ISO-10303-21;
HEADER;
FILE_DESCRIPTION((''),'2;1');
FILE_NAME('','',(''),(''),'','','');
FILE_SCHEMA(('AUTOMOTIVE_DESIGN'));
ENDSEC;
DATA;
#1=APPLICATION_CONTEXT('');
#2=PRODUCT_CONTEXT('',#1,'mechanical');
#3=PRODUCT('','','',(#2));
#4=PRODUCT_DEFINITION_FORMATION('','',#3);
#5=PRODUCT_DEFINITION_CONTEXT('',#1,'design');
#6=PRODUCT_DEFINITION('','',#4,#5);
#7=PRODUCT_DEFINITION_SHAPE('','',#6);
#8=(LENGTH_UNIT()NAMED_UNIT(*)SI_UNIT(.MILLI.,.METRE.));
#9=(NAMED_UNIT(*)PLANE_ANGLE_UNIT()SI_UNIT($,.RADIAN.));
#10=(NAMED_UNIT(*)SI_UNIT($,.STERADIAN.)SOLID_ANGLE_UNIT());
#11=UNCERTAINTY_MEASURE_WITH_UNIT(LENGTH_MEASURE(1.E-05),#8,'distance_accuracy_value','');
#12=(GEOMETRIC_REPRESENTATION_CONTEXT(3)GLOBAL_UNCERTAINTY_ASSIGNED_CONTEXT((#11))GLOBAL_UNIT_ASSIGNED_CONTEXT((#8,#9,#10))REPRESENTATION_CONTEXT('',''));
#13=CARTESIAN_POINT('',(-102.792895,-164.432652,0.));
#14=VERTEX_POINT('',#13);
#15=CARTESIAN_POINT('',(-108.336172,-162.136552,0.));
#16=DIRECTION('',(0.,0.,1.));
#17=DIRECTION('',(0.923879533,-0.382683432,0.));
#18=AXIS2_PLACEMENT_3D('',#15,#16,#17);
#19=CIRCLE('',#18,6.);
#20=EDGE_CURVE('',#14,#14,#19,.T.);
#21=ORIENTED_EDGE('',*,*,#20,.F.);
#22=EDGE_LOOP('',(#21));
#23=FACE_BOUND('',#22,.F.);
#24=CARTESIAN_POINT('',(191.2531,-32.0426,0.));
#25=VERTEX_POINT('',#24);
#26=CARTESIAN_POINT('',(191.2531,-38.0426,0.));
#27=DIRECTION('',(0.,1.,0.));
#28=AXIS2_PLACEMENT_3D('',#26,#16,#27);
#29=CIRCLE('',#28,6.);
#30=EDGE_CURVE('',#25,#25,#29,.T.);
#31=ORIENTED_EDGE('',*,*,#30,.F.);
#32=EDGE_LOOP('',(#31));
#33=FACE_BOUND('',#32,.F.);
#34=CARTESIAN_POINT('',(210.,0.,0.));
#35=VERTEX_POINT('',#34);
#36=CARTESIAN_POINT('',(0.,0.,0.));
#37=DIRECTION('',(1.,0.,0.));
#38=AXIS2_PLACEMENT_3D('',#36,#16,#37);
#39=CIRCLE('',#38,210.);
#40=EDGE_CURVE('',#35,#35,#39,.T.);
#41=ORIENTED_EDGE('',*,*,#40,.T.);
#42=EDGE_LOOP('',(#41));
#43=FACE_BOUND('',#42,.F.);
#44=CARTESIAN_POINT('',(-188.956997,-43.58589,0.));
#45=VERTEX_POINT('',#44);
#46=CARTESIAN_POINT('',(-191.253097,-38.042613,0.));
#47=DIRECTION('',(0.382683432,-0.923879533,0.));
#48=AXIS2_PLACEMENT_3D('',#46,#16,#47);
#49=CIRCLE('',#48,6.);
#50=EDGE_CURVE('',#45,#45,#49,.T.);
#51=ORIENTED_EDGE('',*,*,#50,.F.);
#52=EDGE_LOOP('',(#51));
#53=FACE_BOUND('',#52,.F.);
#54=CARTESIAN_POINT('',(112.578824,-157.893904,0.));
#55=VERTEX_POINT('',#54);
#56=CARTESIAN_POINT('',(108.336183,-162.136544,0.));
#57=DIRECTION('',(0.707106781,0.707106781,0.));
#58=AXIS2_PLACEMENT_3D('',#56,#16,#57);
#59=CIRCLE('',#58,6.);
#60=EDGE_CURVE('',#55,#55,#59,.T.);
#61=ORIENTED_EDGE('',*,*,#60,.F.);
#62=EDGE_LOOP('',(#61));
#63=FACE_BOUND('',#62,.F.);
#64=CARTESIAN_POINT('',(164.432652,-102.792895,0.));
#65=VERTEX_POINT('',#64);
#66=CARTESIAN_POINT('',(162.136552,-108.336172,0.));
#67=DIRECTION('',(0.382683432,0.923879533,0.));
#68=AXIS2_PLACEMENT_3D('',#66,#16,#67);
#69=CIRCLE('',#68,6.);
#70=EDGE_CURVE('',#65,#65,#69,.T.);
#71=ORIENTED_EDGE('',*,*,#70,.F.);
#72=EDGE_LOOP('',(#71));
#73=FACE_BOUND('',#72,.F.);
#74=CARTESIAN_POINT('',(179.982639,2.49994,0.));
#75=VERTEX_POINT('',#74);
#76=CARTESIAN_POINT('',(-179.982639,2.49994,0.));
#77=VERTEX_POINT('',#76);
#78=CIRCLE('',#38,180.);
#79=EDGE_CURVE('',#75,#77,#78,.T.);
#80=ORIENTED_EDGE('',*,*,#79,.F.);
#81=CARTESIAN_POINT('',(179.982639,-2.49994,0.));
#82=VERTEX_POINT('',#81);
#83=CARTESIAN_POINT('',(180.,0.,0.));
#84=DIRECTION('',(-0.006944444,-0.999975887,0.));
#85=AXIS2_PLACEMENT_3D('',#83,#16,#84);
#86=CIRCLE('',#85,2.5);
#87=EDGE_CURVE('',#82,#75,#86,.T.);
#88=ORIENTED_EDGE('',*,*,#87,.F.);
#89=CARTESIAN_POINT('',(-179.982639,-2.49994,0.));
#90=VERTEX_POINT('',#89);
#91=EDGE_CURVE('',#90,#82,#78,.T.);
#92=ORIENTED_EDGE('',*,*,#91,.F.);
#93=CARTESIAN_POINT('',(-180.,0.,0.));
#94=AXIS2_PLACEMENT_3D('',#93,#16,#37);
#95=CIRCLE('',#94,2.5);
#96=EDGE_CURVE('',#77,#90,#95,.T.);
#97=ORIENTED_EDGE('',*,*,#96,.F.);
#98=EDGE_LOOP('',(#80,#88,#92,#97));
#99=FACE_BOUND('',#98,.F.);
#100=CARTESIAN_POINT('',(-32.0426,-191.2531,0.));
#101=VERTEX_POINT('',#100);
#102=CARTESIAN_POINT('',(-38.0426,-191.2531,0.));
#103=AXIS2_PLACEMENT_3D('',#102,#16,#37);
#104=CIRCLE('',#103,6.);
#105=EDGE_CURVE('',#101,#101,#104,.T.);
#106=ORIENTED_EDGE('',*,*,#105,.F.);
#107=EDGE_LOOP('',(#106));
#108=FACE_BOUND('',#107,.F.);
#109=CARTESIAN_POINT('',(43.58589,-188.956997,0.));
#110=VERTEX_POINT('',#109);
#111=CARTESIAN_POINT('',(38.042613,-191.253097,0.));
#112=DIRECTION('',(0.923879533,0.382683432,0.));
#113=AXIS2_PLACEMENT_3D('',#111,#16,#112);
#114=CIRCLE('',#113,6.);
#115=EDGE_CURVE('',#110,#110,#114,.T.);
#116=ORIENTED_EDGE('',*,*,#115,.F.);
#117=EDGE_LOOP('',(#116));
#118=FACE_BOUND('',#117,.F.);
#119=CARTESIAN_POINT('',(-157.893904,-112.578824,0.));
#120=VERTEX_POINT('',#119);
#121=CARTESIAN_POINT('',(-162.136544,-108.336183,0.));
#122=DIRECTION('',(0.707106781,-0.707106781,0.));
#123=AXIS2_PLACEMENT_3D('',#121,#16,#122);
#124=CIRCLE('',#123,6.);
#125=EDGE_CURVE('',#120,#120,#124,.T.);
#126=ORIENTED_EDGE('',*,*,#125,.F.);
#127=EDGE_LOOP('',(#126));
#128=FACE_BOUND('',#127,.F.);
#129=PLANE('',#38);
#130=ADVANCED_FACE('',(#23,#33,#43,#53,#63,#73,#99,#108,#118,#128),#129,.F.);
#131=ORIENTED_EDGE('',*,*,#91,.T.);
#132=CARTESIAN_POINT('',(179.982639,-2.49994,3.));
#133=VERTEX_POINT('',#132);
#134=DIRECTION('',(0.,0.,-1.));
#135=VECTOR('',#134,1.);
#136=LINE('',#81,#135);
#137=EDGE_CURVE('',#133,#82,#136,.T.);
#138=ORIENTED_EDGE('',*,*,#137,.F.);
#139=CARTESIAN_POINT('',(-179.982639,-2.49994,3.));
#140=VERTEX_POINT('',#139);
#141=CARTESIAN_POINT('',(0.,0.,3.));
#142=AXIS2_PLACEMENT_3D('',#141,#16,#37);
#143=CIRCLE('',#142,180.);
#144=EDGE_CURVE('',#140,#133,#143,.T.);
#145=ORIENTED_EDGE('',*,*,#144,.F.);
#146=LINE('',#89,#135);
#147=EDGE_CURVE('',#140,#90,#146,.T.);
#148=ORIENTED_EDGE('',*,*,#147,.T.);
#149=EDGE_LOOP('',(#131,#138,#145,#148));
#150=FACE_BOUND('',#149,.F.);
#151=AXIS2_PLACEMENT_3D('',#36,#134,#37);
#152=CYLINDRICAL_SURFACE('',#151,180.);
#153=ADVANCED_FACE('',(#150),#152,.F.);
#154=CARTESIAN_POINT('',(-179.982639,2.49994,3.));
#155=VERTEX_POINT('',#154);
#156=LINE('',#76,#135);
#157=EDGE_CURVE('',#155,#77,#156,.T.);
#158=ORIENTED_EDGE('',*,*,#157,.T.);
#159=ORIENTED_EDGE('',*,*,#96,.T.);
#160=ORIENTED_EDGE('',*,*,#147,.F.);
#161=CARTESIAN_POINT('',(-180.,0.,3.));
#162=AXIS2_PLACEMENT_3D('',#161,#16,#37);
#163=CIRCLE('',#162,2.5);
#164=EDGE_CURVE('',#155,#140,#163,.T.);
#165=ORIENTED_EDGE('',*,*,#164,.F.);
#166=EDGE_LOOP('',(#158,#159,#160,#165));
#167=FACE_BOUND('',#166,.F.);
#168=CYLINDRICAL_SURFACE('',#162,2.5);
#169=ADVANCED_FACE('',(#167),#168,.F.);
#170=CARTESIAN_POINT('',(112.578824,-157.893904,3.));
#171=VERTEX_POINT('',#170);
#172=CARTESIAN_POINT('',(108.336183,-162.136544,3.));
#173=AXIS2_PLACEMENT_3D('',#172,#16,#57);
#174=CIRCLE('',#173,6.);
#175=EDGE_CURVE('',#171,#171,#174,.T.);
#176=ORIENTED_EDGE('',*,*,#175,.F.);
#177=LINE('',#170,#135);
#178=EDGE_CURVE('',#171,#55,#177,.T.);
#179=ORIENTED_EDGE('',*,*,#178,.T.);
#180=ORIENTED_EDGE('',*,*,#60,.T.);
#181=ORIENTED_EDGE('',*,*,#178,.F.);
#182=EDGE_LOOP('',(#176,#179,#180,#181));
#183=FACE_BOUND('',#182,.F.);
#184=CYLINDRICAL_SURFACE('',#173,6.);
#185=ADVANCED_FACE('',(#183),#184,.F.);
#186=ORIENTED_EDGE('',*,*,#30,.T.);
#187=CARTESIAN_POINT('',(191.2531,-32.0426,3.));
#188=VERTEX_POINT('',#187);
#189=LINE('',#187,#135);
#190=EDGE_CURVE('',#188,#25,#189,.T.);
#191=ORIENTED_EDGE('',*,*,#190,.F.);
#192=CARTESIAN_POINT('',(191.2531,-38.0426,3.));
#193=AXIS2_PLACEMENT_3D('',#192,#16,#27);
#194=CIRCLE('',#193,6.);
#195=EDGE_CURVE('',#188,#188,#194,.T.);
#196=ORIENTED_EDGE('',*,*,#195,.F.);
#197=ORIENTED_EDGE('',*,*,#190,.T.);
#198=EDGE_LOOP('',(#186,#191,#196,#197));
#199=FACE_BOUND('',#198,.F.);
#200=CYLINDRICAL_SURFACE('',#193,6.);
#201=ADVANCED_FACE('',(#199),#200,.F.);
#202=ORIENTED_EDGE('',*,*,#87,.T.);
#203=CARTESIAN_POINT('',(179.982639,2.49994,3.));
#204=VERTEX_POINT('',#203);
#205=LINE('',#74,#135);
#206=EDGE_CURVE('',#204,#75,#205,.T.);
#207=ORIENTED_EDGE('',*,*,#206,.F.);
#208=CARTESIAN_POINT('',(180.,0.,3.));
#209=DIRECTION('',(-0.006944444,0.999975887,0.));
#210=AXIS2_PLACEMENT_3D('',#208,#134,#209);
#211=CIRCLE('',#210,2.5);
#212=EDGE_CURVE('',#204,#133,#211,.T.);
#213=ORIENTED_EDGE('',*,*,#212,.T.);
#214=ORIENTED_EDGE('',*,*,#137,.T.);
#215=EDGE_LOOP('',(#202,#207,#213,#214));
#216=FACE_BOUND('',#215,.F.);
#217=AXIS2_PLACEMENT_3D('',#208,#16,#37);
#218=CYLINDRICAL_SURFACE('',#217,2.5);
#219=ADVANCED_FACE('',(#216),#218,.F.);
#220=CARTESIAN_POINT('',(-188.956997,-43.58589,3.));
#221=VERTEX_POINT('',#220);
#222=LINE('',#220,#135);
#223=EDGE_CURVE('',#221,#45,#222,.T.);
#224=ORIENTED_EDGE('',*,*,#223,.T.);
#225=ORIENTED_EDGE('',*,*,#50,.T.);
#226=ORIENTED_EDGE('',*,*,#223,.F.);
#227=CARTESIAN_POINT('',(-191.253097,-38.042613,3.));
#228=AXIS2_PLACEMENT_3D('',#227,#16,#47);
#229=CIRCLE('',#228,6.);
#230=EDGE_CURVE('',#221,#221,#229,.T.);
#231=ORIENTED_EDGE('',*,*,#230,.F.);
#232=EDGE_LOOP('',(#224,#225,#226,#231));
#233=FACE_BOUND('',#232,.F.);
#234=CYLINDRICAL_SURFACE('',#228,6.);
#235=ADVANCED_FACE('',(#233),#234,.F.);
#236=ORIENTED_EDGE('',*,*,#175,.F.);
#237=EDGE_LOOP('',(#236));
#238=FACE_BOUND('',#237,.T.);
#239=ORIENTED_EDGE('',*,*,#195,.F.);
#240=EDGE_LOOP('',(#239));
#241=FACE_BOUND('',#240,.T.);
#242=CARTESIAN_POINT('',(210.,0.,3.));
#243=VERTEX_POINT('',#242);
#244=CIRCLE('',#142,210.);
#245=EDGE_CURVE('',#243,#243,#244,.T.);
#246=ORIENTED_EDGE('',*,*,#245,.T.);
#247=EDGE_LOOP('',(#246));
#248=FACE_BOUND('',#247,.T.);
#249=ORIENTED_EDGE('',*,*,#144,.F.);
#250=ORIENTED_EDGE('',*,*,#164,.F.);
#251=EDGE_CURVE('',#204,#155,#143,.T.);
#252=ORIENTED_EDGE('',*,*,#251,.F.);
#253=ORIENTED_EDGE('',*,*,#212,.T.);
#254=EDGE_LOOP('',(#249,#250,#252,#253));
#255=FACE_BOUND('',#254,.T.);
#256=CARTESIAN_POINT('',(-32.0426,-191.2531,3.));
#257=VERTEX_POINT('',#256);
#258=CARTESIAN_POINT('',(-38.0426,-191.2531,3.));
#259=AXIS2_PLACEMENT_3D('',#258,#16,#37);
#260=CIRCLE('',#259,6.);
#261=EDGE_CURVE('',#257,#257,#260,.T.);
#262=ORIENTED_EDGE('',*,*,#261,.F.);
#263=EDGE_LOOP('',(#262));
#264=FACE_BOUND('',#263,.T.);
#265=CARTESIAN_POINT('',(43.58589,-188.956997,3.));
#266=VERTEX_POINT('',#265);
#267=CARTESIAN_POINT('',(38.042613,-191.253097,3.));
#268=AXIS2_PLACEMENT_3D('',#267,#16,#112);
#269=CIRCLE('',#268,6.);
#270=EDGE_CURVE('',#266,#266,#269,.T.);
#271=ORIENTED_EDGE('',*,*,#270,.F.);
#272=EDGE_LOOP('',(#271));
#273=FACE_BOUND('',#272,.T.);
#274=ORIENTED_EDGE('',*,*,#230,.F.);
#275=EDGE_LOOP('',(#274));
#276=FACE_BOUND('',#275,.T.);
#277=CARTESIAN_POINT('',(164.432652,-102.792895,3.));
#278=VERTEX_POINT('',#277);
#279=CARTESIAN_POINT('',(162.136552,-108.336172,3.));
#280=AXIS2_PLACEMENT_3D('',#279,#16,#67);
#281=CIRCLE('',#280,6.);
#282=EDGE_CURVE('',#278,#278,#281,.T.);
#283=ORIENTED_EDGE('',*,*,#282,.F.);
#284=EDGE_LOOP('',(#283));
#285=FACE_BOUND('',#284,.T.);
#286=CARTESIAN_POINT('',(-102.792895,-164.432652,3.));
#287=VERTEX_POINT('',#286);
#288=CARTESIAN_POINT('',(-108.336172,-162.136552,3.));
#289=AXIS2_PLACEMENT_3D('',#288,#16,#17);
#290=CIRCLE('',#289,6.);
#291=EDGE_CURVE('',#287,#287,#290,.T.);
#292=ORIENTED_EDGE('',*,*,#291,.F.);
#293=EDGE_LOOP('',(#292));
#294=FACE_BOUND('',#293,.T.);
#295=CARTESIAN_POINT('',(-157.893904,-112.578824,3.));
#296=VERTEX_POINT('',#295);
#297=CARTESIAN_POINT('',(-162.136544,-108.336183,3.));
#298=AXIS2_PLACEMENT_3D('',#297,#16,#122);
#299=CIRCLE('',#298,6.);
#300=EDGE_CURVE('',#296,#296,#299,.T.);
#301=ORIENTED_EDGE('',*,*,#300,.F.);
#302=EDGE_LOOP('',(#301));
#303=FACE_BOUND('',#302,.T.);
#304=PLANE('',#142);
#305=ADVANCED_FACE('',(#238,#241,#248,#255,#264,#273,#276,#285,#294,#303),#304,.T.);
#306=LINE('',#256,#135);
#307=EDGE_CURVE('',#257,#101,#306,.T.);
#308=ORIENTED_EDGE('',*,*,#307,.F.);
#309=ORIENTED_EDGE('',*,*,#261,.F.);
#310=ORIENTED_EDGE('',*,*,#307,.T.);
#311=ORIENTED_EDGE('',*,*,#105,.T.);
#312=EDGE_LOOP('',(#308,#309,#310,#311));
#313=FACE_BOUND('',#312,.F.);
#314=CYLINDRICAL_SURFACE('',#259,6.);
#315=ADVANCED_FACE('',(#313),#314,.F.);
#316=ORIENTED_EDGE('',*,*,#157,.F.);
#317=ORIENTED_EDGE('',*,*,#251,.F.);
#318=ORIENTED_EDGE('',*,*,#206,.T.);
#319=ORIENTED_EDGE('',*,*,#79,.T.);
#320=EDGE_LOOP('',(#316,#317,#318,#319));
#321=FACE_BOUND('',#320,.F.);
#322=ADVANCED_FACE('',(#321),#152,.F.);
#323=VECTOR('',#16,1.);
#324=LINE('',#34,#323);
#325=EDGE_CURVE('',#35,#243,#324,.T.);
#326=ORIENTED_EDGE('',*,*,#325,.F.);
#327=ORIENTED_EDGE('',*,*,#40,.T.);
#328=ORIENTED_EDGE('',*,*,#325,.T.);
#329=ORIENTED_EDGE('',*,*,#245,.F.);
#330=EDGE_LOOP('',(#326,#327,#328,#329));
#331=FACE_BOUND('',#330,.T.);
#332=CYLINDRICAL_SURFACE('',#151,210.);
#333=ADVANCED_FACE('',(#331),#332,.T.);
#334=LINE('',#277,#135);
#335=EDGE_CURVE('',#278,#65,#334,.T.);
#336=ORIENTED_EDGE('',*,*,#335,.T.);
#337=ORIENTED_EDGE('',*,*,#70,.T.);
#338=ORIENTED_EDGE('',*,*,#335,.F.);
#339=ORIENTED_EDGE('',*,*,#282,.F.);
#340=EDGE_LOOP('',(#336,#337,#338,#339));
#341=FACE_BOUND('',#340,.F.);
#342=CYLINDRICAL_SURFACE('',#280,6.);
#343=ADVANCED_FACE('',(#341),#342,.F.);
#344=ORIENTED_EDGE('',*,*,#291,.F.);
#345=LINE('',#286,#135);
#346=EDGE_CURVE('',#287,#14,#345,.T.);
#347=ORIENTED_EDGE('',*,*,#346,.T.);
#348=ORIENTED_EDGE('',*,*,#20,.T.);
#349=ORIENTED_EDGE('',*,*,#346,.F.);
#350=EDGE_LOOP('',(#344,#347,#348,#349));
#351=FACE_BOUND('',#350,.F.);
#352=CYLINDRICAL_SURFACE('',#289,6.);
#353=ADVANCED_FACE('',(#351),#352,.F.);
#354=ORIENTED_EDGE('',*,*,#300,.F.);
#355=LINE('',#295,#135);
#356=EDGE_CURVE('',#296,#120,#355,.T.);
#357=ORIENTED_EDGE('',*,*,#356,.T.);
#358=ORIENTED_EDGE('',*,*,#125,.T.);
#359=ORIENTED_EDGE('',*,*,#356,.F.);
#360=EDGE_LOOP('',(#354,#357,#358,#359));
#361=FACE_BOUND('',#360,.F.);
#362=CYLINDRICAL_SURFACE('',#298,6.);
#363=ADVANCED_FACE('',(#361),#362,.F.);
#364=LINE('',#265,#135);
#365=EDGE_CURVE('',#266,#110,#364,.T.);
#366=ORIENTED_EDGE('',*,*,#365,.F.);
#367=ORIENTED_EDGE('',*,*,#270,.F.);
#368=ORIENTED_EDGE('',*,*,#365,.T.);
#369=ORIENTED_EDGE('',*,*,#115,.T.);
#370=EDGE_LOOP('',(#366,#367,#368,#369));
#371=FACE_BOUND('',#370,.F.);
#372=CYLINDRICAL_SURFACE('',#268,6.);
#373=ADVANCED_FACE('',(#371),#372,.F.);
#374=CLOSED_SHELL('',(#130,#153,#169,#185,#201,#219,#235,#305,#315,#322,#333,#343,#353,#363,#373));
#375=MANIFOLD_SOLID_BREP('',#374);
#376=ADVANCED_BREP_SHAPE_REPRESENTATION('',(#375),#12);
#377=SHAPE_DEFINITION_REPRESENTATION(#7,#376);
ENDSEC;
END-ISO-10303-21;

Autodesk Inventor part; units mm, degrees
ref_plane "YZ Plane" through (0, 0, 0) normal (1, 0, 0) x (0, 1, 0)
ref_plane "XZ Plane" through (0, 0, 0) normal (0, 1, 0) x (-1, 0, 0)
ref_plane "XY Plane" through (0, 0, 0) normal (0, 0, 1) x (1, 0, 0)
sketch "Sketch1" plane through (0, 0, 0) normal (0, 0, 1) x (1, 0, 0)
  circle A0 centre (0, 0) radius 180
  circle A1 centre (0, 0) radius 210
  circle A2 centre (0, 0) radius 195 construction
  line L0 (0, 210) -> (0, 180) construction
  point P0 (0, 195)
  dimension "d9" = 390
  dimension "d11" = 30
extrude "Plate1" add sketch "Sketch1" along normal blind 3
sketch "Sketch2" plane through (0, 0, 3) normal (0, 0, 1) x (1, 0, 0)
  circle A0 centre (0, 0) radius 180 construction
  circle A1 centre (0, 0) radius 210 construction
  circle A2 centre (0, 0) radius 210 projected
  circle A3 centre (0, 0) radius 180 projected
  line L0 (0, 0) -> (0, -210) construction
  line L1 (0, 0) -> (-40.969, -205.9649) construction
  line L2 (-35.1163, -176.5414) -> (-40.969, -205.9649) construction
  circle A4 centre (-38.0426, -191.2531) radius 6
  dimension "d20" = 11.25
  dimension "d21" = 12
extrude "Extrusion1" cut sketch "Sketch2" against normal through all contours A4
pattern_circular "Circular Pattern1" count 8 over 157.5 about axis through (0, 0, 0) along (0, 0, 1) of "Extrusion1" both ways yes
sketch "Sketch3" plane through (0, 0, 3) normal (0, 0, 1) x (1, 0, 0)
  circle A0 centre (0, 0) radius 180 construction
  line L0 (180, 0) -> (-180, 0) construction
  circle A1 centre (180, 0) radius 2.5
  circle A2 centre (-180, 0) radius 2.5
  circle A3 centre (-161.2452, -80) radius 2.5
  line L1 (-161.2452, -80) -> (161.2452, -80) construction
  circle A4 centre (161.2452, -80) radius 2.5
  dimension "d27" = 5
  dimension "d29" = 80
extrude "Extrusion2" cut sketch "Sketch3" against normal through all contours A1 | A2
equation "\"d9\" = Шпил_пласт_НОС_диам_центров"
equation "\"d11\" = Шпил_пласт_НОС_ширина"
equation "\"d21\" = Шпил_пласт_НОС_диам_шпильки"
equation "\"d2\" = Thickness"
equation "\"BendRadius\" = Thickness"
equation "\"BendReliefWidth\" = Thickness"
equation "\"BendReliefDepth\" = 0.5 * Thickness"
equation "\"CornerReliefSize\" = 4 * Thickness"
equation "\"MinimumRemnant\" = 2 * Thickness"
equation "\"TransitionRadius\" = BendRadius"
equation "\"JacobiRadiusSize\" = BendRadius"
equation "\"GapSize\" = Thickness"
equation "\"Шпил_пласт_НОС_диам_центров\" = 390"
equation "\"Шпил_пласт_НОС_ширина\" = 30"
equation "\"Шпил_пласт_НОС_диам_шпильки\" = 12"
equation "\"Thickness\" = 3"
properties part number "ДМС 010 кольцо под шпильки"
